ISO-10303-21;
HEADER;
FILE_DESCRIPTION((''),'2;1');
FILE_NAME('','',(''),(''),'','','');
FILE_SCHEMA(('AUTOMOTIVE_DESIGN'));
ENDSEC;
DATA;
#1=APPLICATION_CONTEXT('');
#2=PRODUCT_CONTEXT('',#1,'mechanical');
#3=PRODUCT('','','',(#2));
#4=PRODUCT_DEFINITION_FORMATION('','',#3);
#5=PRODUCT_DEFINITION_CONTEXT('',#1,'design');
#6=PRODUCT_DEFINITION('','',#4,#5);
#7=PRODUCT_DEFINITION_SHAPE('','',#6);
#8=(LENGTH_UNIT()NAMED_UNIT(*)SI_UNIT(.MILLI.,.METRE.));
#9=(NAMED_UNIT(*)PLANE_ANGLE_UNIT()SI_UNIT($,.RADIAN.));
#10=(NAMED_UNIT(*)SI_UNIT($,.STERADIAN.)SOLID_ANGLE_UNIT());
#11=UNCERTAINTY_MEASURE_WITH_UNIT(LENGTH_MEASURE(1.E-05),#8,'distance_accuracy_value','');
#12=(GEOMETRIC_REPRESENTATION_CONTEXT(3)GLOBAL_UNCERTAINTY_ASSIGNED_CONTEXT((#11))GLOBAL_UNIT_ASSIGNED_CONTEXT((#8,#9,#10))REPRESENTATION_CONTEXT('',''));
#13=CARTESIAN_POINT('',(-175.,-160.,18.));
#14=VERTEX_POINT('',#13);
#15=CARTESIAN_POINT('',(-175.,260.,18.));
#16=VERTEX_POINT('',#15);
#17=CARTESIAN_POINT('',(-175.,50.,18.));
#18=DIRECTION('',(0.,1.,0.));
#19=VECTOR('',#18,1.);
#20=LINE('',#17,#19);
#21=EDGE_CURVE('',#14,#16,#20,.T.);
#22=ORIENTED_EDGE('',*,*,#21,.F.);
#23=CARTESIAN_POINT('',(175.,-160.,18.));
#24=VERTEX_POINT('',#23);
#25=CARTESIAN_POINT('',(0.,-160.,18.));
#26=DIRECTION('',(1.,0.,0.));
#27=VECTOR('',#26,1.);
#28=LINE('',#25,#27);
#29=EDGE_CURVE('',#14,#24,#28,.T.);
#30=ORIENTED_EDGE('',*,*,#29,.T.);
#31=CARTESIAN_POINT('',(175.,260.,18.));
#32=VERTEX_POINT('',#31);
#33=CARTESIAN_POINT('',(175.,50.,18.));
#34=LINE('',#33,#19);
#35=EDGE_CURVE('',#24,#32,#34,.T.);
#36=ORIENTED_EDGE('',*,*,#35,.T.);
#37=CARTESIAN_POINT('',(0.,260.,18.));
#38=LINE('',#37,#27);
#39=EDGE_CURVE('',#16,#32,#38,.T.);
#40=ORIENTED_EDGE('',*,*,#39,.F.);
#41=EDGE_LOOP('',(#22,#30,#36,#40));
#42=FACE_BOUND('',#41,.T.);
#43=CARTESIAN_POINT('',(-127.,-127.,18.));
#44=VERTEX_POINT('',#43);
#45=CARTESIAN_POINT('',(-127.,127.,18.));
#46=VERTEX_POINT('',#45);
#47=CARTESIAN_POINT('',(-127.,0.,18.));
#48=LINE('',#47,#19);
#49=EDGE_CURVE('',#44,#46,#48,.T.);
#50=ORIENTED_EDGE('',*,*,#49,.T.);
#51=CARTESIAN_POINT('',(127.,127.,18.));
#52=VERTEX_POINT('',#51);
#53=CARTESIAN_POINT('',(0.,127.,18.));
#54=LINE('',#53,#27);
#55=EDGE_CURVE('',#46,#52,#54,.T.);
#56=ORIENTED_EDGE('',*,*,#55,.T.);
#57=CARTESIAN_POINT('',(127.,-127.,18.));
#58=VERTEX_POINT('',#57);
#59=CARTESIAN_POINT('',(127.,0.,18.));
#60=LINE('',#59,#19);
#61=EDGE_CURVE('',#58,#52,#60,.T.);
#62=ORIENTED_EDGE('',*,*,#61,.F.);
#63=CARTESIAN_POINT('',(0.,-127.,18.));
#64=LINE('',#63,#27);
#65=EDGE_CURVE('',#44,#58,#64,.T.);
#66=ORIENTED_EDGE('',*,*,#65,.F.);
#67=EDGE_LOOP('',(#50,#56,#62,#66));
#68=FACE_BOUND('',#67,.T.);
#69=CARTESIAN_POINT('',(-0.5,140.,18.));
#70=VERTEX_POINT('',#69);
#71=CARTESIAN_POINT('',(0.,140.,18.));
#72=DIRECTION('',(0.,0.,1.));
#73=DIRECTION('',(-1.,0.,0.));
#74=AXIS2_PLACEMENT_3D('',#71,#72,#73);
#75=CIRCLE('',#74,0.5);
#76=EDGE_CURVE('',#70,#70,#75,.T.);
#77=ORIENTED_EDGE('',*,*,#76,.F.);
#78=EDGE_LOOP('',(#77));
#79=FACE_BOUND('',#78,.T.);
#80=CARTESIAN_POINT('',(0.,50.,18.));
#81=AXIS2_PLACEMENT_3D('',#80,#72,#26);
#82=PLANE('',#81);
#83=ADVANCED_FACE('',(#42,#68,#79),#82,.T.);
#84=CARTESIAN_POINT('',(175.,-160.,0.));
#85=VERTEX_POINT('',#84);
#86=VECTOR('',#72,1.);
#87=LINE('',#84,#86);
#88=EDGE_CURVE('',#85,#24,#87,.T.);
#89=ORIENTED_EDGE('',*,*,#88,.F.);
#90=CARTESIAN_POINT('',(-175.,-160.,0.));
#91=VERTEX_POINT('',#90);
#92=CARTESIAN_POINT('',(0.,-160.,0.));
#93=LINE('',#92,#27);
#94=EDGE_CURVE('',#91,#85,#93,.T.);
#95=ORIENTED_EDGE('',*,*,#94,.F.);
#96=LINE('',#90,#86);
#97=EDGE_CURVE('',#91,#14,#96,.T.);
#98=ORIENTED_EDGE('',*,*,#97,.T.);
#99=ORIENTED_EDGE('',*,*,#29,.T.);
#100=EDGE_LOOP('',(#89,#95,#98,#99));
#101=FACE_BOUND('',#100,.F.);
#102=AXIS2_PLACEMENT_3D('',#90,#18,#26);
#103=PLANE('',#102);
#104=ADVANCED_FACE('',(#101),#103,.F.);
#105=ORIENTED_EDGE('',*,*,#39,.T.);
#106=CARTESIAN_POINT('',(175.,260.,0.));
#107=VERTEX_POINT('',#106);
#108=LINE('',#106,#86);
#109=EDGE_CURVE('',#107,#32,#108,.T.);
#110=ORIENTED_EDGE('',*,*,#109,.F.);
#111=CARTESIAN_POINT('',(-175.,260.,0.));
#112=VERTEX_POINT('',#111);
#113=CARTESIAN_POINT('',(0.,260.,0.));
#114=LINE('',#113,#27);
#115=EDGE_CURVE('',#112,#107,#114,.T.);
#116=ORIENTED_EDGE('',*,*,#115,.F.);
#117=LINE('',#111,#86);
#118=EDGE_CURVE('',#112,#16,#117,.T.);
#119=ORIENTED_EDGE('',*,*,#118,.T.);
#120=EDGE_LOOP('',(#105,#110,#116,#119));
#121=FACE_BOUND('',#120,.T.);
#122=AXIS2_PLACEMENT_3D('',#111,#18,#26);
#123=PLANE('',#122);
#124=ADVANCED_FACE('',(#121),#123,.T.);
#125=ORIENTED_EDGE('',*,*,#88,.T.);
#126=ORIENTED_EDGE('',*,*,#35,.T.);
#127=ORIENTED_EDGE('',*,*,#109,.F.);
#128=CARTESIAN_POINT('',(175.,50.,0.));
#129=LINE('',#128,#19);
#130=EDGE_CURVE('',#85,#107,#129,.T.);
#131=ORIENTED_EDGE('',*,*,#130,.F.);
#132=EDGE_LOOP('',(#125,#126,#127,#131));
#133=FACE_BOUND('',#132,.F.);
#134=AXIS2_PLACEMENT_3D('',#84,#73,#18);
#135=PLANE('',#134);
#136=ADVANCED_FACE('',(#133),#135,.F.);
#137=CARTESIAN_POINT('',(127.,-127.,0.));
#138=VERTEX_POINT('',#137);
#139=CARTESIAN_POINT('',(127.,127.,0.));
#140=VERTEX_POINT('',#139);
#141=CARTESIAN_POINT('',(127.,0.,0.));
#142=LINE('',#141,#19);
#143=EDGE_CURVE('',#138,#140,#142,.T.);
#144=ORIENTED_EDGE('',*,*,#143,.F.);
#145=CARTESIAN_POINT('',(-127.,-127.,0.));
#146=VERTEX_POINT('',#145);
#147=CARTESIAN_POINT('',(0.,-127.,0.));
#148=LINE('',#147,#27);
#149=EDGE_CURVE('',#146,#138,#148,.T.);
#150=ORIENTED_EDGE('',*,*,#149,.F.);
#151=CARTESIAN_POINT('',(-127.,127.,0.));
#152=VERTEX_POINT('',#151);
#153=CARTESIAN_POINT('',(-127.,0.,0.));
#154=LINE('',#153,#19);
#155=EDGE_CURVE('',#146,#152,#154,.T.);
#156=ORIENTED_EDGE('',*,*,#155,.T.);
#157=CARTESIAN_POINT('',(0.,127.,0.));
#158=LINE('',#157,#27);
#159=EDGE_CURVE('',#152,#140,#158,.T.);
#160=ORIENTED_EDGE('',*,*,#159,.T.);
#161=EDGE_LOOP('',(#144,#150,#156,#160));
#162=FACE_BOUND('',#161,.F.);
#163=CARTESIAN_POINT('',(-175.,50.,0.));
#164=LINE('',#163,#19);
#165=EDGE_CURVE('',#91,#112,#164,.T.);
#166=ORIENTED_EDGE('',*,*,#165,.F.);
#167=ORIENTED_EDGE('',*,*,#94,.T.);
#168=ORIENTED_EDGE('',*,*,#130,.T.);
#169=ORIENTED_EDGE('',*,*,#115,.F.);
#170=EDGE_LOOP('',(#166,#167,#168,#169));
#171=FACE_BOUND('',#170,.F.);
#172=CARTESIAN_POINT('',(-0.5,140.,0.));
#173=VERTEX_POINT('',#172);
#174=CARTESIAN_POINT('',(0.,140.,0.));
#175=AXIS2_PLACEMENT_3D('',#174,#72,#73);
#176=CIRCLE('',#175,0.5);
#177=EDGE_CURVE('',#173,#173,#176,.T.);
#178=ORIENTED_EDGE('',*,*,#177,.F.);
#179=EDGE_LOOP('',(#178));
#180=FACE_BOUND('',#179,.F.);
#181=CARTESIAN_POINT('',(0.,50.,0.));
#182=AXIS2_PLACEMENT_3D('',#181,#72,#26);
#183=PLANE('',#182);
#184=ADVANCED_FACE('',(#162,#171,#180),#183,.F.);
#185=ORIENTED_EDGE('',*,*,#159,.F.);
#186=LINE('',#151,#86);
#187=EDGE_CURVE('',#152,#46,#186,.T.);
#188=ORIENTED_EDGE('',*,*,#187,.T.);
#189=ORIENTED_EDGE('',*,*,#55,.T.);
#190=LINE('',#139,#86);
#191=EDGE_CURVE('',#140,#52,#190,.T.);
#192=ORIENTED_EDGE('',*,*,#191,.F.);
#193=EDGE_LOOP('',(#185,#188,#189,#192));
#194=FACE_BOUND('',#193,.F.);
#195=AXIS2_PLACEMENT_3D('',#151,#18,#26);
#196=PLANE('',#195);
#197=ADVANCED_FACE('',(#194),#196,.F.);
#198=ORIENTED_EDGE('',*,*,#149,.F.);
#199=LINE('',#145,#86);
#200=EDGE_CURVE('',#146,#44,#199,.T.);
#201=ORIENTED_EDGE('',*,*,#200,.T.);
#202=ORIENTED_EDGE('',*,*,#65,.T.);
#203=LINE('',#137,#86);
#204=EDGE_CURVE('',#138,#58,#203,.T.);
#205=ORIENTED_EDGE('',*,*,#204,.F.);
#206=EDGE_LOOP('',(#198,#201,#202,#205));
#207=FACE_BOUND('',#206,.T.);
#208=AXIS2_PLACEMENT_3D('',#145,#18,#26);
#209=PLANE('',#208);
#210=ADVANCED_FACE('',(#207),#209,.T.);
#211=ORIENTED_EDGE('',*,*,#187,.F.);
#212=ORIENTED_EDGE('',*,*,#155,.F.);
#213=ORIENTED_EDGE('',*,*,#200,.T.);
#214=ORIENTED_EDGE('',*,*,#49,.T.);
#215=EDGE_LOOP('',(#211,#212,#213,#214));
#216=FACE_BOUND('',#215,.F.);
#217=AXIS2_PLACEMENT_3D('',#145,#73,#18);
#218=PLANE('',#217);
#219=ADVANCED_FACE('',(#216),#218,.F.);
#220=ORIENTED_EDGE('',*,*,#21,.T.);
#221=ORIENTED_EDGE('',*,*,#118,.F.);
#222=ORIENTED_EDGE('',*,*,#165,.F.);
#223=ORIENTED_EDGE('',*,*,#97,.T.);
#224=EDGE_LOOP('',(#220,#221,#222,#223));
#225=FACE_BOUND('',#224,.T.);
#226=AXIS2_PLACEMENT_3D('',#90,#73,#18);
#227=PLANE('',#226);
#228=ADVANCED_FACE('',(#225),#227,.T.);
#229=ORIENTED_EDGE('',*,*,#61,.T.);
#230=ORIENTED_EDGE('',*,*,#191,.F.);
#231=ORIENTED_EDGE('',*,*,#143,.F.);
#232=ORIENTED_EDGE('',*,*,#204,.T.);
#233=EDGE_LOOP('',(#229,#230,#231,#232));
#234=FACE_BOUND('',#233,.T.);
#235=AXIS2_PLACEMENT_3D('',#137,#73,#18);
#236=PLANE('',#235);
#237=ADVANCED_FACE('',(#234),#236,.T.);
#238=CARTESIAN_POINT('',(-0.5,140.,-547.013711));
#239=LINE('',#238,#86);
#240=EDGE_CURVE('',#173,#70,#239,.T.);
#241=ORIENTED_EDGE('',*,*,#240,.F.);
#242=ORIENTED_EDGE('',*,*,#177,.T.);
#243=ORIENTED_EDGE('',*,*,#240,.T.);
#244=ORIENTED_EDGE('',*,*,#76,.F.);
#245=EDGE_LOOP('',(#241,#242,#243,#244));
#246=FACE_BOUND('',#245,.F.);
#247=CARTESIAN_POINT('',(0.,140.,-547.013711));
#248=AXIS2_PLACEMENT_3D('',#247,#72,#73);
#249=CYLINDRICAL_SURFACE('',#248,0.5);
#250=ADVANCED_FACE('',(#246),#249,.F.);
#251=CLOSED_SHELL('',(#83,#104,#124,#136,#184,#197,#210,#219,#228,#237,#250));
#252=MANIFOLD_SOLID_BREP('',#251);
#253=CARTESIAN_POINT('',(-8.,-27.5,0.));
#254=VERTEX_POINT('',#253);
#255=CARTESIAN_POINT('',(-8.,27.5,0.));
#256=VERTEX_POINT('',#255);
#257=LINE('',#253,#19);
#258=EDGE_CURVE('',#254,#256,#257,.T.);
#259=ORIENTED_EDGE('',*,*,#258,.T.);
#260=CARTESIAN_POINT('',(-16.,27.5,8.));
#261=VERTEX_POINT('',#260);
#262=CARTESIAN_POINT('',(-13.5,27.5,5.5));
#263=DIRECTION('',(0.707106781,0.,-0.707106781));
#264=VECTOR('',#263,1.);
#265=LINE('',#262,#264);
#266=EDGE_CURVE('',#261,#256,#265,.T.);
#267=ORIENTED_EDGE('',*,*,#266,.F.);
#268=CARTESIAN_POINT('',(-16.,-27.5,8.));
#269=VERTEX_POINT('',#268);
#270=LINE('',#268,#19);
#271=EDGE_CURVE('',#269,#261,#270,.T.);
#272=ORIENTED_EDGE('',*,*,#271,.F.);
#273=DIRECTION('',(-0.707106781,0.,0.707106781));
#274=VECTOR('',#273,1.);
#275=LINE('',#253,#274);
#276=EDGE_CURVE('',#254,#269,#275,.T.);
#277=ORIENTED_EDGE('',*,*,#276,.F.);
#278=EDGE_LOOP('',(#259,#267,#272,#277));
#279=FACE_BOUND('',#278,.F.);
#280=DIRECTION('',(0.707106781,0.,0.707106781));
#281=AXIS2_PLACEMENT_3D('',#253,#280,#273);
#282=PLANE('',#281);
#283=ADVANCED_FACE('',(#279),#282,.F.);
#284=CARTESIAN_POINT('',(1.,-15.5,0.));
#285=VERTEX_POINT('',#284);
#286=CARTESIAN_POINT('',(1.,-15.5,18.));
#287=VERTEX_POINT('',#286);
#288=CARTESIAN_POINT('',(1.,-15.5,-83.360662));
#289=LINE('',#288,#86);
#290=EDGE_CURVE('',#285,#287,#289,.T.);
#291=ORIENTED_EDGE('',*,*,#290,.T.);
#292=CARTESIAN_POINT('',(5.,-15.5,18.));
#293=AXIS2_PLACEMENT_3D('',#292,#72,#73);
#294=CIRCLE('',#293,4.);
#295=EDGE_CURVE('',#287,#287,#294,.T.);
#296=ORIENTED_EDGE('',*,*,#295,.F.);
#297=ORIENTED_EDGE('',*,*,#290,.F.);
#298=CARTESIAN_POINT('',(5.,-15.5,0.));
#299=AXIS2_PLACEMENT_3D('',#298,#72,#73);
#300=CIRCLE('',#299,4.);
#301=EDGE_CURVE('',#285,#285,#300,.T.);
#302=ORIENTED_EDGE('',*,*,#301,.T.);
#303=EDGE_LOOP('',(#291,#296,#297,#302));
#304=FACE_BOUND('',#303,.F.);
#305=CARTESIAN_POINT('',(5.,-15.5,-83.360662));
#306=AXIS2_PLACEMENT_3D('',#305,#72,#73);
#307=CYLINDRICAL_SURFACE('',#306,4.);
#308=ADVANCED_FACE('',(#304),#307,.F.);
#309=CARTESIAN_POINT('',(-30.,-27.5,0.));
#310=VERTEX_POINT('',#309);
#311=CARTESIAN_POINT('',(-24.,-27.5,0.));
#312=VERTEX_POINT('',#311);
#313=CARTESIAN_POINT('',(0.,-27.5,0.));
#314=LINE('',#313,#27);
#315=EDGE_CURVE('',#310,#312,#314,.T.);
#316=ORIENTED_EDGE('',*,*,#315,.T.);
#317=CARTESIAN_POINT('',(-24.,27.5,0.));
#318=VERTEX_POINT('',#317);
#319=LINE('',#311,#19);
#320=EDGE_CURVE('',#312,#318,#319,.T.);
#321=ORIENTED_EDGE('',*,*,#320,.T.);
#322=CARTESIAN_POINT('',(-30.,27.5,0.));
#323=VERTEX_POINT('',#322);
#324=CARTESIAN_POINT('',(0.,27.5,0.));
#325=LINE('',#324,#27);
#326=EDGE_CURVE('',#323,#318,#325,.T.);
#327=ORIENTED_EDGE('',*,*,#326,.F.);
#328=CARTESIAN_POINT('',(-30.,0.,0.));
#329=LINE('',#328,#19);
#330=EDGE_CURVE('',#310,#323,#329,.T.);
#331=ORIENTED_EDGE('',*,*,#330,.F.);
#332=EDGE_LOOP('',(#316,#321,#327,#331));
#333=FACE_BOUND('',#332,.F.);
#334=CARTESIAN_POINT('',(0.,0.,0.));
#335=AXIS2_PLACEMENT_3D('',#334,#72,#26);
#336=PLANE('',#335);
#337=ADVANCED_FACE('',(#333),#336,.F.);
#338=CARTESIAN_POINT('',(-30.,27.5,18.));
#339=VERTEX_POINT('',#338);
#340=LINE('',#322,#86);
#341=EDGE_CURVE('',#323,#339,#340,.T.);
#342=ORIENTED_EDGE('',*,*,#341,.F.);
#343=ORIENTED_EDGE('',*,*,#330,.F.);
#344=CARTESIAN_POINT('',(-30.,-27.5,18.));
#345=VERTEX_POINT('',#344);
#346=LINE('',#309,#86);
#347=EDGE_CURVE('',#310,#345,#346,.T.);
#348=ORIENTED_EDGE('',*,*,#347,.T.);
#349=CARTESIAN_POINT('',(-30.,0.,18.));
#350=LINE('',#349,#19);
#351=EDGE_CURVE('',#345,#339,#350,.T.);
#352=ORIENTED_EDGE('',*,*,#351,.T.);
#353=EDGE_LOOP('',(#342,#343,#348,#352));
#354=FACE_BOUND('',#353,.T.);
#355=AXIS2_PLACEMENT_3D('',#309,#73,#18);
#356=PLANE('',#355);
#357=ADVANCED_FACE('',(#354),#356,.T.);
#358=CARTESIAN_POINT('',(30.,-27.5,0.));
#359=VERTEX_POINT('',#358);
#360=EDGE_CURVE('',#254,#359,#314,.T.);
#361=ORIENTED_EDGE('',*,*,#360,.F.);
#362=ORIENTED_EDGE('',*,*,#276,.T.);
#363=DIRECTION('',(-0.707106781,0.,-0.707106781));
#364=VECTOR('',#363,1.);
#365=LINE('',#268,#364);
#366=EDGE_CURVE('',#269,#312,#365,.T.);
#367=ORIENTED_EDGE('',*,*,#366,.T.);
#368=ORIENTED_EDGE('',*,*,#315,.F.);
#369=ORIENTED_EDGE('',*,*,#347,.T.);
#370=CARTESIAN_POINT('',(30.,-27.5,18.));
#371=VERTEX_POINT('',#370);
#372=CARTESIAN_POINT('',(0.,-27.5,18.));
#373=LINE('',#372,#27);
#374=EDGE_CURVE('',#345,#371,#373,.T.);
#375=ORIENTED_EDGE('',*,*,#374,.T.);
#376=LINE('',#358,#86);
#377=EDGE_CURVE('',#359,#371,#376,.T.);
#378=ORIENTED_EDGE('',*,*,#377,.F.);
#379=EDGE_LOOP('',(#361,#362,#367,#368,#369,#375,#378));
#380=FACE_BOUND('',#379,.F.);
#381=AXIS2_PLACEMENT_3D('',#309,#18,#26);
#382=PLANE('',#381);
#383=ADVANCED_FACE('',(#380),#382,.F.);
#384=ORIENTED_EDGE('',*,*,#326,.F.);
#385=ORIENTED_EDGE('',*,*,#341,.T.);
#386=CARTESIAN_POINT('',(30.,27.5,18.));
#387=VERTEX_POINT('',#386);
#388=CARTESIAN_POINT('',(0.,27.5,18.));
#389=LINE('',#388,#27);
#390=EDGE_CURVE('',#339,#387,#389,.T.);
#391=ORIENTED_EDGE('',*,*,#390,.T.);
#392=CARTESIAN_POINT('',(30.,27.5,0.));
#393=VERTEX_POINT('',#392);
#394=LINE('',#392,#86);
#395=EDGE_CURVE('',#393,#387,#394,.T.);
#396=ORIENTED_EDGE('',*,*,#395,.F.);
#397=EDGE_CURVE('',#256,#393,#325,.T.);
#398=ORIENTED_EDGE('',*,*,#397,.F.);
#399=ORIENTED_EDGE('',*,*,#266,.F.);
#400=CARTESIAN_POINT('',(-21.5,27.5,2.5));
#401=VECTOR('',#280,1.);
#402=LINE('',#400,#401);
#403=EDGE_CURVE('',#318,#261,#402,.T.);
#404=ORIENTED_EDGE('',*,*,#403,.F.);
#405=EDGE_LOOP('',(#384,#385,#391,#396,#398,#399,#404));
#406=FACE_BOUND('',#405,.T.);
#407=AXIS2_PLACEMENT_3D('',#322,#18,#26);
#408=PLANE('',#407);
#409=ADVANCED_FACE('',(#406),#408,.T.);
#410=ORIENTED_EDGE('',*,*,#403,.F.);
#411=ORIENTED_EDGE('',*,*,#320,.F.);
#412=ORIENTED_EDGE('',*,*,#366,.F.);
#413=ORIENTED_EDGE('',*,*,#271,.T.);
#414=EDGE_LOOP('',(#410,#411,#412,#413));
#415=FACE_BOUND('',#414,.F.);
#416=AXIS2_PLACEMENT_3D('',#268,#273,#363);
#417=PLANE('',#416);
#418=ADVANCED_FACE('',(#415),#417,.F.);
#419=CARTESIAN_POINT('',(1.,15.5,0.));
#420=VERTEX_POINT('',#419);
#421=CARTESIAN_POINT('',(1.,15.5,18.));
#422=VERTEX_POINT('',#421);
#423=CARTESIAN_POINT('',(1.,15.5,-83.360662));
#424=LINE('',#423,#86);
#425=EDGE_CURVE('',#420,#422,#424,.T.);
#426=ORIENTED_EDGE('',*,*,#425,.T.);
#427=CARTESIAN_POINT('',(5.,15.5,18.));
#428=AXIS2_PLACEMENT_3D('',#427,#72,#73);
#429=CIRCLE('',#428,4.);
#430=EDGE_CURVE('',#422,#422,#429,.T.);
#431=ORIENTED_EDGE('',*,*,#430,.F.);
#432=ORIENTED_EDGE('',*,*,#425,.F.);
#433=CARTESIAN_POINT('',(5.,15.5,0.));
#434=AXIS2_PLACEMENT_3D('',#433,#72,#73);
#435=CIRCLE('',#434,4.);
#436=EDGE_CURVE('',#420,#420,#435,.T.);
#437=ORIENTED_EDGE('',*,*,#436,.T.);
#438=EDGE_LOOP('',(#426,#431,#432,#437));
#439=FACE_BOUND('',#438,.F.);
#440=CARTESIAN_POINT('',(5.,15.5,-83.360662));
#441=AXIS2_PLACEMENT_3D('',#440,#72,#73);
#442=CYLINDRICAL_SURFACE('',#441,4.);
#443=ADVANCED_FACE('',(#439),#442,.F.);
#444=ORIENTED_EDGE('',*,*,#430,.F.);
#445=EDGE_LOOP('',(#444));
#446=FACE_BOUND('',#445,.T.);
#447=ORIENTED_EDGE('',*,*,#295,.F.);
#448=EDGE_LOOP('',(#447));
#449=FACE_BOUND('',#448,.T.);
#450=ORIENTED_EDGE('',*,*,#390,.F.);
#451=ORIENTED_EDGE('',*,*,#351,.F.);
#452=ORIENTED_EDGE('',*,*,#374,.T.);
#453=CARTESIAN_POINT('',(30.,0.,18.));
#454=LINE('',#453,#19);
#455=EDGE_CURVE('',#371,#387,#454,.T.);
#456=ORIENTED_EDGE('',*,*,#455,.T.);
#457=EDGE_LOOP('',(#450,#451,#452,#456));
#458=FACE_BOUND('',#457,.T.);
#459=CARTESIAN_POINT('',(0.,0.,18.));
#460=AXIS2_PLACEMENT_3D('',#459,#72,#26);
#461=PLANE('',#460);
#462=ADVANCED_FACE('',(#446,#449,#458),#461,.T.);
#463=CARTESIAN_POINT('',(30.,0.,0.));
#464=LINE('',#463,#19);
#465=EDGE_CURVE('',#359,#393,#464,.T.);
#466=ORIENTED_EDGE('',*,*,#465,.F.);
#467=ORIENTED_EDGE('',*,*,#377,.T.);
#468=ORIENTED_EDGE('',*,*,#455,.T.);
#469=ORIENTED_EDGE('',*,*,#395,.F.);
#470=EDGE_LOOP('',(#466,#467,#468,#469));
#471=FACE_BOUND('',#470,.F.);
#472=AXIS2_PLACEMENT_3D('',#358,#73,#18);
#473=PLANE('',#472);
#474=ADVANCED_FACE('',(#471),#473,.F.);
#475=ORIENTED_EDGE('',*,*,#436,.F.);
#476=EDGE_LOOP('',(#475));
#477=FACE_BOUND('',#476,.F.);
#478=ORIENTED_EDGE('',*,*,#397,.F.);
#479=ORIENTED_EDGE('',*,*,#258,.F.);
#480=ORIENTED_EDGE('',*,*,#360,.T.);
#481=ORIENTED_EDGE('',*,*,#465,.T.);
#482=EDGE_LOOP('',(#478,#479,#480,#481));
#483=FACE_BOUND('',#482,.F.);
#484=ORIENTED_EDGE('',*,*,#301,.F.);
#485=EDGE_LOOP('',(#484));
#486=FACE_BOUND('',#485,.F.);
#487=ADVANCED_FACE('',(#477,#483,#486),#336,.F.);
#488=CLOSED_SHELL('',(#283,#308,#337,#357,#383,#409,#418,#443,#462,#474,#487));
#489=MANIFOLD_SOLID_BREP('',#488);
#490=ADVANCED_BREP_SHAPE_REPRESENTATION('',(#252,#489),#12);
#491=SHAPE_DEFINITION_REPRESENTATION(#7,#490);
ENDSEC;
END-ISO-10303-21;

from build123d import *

# Parameters (mm, degrees)
F0_W     = 350
F0_H     = 420
F0_W_2   = 254
F0_H_2   = 254
F1_DEPTH = 18
F2_D     = 1
F3_W     = 60
F3_H     = 55
F4_DEPTH = 18
F5_D     = 8
F7_DEPTH = 287.501


with BuildPart() as f1:
    # F0 (on Top) → F1 (new body)
    with BuildSketch(Plane.XY):
        with Locations((0, 50)):
            Rectangle(F0_W, F0_H)
        Rectangle(F0_W_2, F0_H_2, mode=Mode.SUBTRACT)
    extrude(amount=F1_DEPTH)

    # F2 (through all)
    with Locations(Plane(origin=(0, 0, 0), x_dir=(1, 0, 0), z_dir=(0, 0, -1))):
        with Locations((0, -140)):
            Hole(F2_D / 2)


with BuildPart() as f4:
    # F3 (on Top) → F4 (new body)
    with BuildSketch(Plane.XY):
        Rectangle(F3_W, F3_H)
    extrude(amount=F4_DEPTH)

    # F5 (through all)
    with Locations(Plane(origin=(0, 0, 0), x_dir=(1, 0, 0), z_dir=(0, 0, -1))):
        with Locations((5, -15.5), (5, 15.5)):
            Hole(F5_D / 2)

    # F6 (on face) → F7 (cut, through all)
    with BuildSketch(Plane.XZ.offset(27.5)):
        Polygon((-8, 0), (-16, 8), (-24, 0), align=None)
    extrude(amount=-F7_DEPTH, mode=Mode.SUBTRACT)


solid = Compound([f1.part, f4.part])
